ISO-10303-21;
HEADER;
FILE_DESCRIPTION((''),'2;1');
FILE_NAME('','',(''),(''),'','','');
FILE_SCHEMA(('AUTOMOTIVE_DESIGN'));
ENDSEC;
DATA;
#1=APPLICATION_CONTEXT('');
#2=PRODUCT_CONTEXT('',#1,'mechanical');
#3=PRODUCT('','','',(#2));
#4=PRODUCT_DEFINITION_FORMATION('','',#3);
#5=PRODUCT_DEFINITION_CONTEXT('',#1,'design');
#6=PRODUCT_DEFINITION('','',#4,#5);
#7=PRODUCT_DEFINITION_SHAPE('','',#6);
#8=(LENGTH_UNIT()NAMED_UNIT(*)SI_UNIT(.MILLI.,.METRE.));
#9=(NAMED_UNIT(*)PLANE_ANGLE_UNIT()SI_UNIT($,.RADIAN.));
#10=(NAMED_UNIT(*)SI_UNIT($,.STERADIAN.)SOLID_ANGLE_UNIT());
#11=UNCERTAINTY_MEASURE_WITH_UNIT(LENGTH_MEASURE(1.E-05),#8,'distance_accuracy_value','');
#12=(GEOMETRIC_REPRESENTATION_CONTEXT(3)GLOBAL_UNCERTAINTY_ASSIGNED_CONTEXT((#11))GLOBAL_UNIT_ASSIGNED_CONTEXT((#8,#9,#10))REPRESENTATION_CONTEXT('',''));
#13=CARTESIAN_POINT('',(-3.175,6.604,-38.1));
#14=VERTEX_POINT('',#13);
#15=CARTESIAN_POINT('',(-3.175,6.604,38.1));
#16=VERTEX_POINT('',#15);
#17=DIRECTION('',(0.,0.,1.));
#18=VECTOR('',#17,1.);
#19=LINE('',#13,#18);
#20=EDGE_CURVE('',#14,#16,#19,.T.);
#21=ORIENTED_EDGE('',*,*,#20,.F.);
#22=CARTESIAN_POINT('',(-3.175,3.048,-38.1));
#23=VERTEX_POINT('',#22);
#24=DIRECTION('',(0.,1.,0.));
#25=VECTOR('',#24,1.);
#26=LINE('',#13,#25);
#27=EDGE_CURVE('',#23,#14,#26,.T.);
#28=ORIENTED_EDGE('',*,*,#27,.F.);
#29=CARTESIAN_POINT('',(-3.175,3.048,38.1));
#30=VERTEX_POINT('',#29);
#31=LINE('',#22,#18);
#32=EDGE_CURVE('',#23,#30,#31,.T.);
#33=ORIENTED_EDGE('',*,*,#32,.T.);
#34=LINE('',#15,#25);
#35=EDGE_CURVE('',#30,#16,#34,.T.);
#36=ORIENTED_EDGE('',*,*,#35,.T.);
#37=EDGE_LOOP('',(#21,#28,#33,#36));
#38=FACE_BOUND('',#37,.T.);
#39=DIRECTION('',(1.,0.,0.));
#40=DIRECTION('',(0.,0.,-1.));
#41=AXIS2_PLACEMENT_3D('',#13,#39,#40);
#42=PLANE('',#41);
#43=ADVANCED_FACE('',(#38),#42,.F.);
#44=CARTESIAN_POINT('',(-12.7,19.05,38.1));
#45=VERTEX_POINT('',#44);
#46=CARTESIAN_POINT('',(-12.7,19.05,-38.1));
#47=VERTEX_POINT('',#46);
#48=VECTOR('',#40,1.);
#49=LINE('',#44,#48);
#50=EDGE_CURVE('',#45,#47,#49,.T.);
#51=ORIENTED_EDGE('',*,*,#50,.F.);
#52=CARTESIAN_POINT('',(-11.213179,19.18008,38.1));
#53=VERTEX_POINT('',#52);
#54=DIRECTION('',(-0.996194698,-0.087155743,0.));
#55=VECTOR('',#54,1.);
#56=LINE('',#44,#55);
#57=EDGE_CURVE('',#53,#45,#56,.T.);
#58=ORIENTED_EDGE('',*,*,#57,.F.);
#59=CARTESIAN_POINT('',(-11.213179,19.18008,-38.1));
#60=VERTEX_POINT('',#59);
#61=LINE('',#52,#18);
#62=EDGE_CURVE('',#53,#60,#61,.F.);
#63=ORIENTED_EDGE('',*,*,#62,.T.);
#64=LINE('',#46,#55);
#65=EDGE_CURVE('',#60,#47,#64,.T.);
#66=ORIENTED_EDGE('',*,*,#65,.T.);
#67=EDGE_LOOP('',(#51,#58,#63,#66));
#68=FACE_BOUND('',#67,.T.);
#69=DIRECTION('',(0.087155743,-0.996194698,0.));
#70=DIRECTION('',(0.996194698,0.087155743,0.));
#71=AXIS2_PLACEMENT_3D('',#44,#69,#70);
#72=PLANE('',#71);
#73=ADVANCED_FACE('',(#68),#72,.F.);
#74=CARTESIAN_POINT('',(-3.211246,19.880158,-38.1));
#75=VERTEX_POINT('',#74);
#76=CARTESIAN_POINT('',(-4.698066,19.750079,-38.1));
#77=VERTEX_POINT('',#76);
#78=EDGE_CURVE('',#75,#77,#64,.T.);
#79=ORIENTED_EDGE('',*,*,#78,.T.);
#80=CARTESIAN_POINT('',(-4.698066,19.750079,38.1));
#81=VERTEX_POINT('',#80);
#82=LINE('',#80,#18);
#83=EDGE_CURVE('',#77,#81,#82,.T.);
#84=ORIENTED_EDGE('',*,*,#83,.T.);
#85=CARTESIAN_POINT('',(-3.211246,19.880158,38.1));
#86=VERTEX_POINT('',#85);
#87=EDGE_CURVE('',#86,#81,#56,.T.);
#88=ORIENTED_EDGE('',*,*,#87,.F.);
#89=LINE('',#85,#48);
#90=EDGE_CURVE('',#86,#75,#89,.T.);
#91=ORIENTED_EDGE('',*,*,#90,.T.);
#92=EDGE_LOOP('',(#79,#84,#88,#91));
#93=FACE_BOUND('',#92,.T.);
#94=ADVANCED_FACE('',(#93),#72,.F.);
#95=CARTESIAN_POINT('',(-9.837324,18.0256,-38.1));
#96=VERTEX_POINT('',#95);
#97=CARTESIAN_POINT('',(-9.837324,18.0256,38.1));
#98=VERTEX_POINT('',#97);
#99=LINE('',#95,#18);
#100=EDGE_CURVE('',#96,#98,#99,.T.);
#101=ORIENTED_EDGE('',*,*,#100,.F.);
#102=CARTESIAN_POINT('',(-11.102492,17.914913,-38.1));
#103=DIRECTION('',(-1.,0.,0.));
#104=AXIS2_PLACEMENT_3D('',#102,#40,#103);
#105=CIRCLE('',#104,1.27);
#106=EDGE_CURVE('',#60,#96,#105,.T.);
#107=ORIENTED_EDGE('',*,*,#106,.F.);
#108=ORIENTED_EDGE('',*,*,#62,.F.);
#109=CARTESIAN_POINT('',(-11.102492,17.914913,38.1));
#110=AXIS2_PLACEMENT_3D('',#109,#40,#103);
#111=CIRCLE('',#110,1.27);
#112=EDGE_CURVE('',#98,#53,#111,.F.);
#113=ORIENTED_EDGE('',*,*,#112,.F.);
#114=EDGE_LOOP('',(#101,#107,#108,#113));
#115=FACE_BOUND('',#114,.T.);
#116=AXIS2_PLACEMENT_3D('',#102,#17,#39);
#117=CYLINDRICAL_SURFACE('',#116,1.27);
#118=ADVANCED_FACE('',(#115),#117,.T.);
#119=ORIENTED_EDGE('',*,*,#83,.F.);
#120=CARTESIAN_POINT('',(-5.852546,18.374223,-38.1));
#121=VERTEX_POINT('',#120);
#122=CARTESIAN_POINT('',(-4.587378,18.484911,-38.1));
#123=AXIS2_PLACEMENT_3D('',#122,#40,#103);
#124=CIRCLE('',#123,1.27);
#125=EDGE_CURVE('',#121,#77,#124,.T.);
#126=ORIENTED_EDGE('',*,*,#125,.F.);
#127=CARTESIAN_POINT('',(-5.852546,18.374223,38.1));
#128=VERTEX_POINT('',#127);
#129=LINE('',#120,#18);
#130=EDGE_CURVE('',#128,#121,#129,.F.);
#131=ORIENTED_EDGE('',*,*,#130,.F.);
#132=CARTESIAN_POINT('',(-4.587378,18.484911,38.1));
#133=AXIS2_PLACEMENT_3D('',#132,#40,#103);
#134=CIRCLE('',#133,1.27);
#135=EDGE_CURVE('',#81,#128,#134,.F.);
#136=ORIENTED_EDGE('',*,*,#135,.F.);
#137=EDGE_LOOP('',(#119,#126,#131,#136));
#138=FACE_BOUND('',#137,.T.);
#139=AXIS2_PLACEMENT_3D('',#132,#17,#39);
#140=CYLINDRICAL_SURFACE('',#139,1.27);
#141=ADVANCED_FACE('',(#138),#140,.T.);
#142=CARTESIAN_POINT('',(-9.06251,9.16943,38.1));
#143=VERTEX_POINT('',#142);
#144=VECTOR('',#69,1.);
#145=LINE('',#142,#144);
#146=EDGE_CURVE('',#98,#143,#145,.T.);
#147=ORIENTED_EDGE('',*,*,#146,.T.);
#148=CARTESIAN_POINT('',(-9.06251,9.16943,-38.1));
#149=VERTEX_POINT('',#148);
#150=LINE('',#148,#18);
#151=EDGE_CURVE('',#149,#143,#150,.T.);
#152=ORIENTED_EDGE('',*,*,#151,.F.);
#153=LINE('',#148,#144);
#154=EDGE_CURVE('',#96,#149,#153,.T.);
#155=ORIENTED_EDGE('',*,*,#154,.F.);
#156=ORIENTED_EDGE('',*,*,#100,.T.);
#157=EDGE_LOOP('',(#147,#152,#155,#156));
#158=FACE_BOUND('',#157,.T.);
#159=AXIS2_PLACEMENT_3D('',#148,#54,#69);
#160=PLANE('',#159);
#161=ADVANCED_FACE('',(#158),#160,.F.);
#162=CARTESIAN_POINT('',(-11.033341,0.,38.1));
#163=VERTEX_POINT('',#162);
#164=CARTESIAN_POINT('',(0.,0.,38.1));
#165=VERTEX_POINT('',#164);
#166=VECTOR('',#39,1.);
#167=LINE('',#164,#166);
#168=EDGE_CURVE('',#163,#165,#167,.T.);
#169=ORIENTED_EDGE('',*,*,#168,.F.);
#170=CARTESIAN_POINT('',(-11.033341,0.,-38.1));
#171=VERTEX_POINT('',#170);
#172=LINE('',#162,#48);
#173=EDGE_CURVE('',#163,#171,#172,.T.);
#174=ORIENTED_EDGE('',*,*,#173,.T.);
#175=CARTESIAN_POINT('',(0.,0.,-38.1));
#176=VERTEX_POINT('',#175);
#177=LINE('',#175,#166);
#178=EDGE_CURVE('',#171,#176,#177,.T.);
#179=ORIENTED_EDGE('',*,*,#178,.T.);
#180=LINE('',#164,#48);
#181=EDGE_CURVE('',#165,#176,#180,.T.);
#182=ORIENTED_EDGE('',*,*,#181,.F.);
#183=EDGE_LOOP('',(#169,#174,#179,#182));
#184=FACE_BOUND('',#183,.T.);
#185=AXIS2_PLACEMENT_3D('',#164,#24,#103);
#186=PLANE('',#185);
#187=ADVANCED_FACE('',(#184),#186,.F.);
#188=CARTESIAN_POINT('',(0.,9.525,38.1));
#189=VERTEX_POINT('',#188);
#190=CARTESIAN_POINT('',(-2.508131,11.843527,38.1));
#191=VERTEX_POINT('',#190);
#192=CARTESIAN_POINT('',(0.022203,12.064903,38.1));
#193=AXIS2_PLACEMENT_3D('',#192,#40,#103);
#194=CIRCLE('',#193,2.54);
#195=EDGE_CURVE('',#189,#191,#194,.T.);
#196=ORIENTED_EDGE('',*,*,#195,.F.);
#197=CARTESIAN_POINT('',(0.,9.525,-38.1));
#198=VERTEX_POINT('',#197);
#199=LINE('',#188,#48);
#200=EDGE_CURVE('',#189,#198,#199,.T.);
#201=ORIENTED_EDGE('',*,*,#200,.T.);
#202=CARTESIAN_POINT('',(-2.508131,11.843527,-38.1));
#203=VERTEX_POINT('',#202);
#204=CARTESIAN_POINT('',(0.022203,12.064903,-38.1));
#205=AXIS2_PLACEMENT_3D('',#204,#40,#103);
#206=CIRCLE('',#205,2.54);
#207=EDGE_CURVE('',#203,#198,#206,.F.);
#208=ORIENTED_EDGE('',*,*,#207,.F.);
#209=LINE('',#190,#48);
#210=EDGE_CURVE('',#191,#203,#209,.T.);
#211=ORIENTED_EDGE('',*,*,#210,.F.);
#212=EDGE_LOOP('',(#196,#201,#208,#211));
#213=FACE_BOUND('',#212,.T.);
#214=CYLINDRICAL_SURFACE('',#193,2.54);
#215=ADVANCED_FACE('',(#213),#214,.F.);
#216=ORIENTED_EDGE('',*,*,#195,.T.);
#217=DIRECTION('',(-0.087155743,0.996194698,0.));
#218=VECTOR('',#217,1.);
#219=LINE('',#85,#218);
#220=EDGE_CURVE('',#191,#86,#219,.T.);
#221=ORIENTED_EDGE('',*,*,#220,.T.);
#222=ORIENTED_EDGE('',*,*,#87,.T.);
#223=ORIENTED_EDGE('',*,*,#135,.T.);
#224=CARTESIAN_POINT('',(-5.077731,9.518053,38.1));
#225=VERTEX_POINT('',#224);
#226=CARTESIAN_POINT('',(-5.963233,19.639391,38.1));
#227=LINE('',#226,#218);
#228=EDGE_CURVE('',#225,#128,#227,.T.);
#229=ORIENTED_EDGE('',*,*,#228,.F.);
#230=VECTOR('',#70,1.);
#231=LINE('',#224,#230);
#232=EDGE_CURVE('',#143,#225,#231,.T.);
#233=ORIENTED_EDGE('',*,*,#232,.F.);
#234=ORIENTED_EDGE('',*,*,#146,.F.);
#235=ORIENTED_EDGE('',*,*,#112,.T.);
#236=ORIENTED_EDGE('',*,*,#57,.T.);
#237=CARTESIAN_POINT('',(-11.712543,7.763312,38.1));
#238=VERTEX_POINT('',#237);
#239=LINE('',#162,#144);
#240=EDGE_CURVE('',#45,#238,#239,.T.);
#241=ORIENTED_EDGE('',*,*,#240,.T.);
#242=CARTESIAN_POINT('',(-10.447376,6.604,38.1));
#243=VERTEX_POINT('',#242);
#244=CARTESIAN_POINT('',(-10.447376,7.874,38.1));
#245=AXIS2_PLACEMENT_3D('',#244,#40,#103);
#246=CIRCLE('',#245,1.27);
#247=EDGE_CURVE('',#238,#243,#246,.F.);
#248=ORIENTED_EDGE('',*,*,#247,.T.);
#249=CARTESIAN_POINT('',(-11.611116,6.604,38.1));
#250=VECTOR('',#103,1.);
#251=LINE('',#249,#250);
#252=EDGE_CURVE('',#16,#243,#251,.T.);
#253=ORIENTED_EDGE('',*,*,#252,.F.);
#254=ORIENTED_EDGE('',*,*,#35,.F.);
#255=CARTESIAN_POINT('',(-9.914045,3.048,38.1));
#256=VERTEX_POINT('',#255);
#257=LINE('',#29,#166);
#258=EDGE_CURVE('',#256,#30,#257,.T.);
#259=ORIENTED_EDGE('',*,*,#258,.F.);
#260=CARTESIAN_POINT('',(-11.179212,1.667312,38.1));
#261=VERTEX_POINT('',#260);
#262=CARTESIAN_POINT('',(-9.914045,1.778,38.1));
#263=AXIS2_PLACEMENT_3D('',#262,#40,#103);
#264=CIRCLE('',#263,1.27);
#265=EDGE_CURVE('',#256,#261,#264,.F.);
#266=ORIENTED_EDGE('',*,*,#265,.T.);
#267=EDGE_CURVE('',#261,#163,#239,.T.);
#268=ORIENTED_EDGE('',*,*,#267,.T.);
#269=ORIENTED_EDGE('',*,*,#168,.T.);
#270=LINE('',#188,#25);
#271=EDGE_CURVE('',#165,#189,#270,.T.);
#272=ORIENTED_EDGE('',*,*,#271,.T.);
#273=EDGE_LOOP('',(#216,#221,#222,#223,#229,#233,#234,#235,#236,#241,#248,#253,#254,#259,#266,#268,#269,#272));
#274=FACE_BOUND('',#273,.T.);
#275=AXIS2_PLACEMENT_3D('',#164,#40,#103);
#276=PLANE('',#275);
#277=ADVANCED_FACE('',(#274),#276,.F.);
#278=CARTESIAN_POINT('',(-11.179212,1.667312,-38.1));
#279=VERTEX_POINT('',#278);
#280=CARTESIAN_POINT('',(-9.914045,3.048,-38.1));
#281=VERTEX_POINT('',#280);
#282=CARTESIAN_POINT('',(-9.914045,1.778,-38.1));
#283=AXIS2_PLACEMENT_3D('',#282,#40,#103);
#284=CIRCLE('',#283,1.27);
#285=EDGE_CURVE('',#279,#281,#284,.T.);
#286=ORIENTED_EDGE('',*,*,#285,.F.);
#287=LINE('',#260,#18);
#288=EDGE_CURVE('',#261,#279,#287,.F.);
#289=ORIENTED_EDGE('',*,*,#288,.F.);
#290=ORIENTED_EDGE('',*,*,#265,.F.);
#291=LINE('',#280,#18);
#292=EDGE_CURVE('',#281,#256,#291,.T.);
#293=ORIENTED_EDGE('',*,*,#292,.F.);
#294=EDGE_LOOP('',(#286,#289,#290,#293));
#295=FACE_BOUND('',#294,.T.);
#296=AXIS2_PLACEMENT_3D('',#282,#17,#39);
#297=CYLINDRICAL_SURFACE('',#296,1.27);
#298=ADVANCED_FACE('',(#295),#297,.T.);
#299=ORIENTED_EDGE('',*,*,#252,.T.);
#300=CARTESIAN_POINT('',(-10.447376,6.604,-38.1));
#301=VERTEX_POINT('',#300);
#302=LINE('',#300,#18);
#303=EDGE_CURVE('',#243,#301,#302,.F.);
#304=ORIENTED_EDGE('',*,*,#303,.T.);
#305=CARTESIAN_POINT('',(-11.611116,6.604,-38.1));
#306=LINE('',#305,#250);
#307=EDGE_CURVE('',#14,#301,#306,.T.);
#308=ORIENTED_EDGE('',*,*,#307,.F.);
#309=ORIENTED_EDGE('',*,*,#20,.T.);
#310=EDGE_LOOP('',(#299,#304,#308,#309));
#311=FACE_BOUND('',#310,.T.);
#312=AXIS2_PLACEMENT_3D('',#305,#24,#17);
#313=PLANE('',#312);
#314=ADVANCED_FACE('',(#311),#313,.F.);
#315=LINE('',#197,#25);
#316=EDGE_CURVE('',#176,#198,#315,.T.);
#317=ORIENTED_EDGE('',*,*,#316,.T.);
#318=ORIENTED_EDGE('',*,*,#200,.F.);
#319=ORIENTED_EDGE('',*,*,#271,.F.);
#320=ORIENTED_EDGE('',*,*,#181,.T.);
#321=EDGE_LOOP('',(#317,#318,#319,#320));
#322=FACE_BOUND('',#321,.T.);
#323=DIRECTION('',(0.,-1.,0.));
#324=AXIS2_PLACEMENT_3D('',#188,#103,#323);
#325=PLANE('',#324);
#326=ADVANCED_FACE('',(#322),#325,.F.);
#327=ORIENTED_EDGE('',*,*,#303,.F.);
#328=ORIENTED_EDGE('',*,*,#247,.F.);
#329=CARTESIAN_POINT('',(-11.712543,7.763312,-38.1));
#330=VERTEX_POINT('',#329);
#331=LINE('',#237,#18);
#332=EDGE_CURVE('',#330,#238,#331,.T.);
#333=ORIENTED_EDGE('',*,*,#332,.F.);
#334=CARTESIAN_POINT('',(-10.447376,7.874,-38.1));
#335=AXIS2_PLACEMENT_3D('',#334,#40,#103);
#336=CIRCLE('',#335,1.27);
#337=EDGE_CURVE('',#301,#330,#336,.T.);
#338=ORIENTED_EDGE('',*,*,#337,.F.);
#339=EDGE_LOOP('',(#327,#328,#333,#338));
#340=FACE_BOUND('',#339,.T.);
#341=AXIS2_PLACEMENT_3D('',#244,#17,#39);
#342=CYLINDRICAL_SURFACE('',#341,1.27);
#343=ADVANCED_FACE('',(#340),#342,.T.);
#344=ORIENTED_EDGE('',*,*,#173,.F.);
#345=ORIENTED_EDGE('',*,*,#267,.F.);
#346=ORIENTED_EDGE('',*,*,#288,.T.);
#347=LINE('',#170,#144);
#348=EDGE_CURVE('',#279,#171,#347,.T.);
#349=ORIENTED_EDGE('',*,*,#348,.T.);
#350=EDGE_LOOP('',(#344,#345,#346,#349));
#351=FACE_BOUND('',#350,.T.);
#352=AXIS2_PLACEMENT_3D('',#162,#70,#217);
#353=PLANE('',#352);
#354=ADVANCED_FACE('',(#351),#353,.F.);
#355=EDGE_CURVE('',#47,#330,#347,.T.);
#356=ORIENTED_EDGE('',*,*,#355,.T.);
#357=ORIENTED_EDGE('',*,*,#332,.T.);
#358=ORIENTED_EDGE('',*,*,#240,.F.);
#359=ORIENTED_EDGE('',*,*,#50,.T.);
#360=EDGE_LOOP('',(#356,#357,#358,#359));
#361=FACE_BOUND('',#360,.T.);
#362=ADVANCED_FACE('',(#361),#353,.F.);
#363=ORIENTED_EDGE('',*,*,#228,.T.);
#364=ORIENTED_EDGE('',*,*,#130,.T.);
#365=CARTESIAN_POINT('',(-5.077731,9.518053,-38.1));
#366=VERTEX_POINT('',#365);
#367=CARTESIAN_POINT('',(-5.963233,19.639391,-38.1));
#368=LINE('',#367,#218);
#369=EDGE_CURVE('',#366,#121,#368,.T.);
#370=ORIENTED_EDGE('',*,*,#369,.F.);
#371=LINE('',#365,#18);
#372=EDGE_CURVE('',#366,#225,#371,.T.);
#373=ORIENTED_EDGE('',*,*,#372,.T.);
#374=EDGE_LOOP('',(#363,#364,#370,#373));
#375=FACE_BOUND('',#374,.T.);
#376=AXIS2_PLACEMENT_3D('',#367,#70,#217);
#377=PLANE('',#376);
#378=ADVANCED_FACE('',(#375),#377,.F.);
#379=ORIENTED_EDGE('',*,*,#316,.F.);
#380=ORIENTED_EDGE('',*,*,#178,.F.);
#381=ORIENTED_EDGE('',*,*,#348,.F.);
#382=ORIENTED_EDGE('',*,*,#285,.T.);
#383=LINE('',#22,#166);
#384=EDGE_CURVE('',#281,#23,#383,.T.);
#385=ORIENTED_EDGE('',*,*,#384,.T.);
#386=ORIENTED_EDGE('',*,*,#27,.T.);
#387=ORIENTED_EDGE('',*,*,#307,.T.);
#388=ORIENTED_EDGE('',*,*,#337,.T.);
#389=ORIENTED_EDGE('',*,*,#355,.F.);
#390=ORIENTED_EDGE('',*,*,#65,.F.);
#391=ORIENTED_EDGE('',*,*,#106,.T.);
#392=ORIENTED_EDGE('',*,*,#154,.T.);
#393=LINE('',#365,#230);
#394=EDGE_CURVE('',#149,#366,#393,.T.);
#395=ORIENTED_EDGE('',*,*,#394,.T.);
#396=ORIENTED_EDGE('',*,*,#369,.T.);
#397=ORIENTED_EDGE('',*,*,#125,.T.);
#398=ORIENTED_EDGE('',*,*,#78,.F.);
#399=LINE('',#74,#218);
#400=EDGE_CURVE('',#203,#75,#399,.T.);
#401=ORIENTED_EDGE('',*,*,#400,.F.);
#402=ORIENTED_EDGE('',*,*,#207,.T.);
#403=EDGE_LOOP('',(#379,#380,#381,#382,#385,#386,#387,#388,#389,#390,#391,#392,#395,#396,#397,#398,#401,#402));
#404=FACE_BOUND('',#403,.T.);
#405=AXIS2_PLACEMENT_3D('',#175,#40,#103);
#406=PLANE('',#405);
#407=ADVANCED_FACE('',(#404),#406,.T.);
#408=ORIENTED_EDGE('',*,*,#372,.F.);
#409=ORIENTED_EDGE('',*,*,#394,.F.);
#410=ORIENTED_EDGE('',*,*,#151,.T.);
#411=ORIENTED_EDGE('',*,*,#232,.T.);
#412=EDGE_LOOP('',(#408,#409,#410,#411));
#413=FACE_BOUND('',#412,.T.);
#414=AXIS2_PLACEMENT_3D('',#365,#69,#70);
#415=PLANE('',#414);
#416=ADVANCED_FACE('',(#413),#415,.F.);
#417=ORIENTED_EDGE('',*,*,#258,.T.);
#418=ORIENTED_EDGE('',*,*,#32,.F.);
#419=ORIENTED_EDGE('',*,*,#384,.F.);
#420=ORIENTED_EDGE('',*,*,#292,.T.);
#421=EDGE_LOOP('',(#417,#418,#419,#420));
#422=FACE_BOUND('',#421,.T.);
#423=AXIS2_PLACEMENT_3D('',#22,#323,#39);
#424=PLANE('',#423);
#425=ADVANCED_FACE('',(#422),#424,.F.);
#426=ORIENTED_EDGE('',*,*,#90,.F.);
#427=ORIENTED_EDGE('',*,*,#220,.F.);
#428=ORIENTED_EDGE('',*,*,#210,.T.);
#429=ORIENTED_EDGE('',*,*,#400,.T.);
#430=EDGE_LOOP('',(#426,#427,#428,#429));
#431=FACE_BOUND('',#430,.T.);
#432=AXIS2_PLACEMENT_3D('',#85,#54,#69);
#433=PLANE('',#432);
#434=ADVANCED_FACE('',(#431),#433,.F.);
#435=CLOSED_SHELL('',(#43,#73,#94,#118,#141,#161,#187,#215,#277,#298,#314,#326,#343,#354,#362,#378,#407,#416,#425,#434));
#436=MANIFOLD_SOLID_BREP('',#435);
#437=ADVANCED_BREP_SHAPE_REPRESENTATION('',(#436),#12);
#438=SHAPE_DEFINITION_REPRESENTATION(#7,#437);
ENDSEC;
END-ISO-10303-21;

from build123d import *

# Parameters (mm, degrees)
BOSS_EXTRUDE1_DEPTH = 38.1
CUT_EXTRUDE1_DEPTH  = 80.768105782
FILLET1_R           = 2.54
FILLET2_R           = 1.27


with BuildPart() as part:
    # Sketch1 → Boss-Extrude1 (new, symmetric)
    with BuildSketch(Plane.XY):
        Polygon((0, 0), (-11.03334096, 0), (-12.7, 19.05), (-3.211245501, 19.88015845), (-2.305286527, 9.525), (0, 9.525), align=None)
    extrude(amount=BOSS_EXTRUDE1_DEPTH, both=True)

    # Sketch2 → Cut-Extrude1 (cut, through all)
    with BuildSketch(Plane.XY.offset(38.1)):
        Polygon((-5.963233354, 19.63939071), (-5.077731008, 9.518052578), (-9.0625098, 9.169429607), (-9.948012147, 19.290767739), align=None)
        Polygon((-11.611116094, 6.604), (-3.175, 6.604), (-3.175, 3.048), (-11.300006406, 3.048), align=None)
    extrude(amount=-CUT_EXTRUDE1_DEPTH, mode=Mode.SUBTRACT)

    # Fillet1
    # the kernel refuses this fillet: 2.54 mm, written as the material it adds along each edge
    with BuildSketch(Plane(origin=(-2.305286527, 9.525, -38.1), x_dir=(1, 0, 0), z_dir=(0, 0, 1))) as fillet1_piece_1_section:
        with BuildLine():
            CenterArc((FILLET1_R * 0.916331174017, FILLET1_R), FILLET1_R, 185, 85)
            Line((-FILLET1_R * 0.0798635240743, FILLET1_R * 0.912844257252), (0, 0))
            Line((0, 0), (FILLET1_R * 0.916331174017, 0))
        make_face()
    fillet1_piece_1 = extrude(amount=76.2, mode=Mode.PRIVATE)
    fillet1_piece_1 = split(fillet1_piece_1, bisect_by=Plane(origin=(0, 10.045448834, 0), z_dir=(-1, 0, 0)), keep=Keep.TOP, mode=Mode.PRIVATE)
    add(fillet1_piece_1)

    # Fillet2
    fillet2_edges = [part.edges().sort_by_distance(p)[0] for p in [
        (-9.948012147, 19.290767739, 0),
        (-5.963233354, 19.63939071, 0),
        (-11.300006406, 3.048, 0),
        (-11.611116094, 6.604, 0),
    ]]
    fillet(fillet2_edges, radius=FILLET2_R)


solid = part.part
